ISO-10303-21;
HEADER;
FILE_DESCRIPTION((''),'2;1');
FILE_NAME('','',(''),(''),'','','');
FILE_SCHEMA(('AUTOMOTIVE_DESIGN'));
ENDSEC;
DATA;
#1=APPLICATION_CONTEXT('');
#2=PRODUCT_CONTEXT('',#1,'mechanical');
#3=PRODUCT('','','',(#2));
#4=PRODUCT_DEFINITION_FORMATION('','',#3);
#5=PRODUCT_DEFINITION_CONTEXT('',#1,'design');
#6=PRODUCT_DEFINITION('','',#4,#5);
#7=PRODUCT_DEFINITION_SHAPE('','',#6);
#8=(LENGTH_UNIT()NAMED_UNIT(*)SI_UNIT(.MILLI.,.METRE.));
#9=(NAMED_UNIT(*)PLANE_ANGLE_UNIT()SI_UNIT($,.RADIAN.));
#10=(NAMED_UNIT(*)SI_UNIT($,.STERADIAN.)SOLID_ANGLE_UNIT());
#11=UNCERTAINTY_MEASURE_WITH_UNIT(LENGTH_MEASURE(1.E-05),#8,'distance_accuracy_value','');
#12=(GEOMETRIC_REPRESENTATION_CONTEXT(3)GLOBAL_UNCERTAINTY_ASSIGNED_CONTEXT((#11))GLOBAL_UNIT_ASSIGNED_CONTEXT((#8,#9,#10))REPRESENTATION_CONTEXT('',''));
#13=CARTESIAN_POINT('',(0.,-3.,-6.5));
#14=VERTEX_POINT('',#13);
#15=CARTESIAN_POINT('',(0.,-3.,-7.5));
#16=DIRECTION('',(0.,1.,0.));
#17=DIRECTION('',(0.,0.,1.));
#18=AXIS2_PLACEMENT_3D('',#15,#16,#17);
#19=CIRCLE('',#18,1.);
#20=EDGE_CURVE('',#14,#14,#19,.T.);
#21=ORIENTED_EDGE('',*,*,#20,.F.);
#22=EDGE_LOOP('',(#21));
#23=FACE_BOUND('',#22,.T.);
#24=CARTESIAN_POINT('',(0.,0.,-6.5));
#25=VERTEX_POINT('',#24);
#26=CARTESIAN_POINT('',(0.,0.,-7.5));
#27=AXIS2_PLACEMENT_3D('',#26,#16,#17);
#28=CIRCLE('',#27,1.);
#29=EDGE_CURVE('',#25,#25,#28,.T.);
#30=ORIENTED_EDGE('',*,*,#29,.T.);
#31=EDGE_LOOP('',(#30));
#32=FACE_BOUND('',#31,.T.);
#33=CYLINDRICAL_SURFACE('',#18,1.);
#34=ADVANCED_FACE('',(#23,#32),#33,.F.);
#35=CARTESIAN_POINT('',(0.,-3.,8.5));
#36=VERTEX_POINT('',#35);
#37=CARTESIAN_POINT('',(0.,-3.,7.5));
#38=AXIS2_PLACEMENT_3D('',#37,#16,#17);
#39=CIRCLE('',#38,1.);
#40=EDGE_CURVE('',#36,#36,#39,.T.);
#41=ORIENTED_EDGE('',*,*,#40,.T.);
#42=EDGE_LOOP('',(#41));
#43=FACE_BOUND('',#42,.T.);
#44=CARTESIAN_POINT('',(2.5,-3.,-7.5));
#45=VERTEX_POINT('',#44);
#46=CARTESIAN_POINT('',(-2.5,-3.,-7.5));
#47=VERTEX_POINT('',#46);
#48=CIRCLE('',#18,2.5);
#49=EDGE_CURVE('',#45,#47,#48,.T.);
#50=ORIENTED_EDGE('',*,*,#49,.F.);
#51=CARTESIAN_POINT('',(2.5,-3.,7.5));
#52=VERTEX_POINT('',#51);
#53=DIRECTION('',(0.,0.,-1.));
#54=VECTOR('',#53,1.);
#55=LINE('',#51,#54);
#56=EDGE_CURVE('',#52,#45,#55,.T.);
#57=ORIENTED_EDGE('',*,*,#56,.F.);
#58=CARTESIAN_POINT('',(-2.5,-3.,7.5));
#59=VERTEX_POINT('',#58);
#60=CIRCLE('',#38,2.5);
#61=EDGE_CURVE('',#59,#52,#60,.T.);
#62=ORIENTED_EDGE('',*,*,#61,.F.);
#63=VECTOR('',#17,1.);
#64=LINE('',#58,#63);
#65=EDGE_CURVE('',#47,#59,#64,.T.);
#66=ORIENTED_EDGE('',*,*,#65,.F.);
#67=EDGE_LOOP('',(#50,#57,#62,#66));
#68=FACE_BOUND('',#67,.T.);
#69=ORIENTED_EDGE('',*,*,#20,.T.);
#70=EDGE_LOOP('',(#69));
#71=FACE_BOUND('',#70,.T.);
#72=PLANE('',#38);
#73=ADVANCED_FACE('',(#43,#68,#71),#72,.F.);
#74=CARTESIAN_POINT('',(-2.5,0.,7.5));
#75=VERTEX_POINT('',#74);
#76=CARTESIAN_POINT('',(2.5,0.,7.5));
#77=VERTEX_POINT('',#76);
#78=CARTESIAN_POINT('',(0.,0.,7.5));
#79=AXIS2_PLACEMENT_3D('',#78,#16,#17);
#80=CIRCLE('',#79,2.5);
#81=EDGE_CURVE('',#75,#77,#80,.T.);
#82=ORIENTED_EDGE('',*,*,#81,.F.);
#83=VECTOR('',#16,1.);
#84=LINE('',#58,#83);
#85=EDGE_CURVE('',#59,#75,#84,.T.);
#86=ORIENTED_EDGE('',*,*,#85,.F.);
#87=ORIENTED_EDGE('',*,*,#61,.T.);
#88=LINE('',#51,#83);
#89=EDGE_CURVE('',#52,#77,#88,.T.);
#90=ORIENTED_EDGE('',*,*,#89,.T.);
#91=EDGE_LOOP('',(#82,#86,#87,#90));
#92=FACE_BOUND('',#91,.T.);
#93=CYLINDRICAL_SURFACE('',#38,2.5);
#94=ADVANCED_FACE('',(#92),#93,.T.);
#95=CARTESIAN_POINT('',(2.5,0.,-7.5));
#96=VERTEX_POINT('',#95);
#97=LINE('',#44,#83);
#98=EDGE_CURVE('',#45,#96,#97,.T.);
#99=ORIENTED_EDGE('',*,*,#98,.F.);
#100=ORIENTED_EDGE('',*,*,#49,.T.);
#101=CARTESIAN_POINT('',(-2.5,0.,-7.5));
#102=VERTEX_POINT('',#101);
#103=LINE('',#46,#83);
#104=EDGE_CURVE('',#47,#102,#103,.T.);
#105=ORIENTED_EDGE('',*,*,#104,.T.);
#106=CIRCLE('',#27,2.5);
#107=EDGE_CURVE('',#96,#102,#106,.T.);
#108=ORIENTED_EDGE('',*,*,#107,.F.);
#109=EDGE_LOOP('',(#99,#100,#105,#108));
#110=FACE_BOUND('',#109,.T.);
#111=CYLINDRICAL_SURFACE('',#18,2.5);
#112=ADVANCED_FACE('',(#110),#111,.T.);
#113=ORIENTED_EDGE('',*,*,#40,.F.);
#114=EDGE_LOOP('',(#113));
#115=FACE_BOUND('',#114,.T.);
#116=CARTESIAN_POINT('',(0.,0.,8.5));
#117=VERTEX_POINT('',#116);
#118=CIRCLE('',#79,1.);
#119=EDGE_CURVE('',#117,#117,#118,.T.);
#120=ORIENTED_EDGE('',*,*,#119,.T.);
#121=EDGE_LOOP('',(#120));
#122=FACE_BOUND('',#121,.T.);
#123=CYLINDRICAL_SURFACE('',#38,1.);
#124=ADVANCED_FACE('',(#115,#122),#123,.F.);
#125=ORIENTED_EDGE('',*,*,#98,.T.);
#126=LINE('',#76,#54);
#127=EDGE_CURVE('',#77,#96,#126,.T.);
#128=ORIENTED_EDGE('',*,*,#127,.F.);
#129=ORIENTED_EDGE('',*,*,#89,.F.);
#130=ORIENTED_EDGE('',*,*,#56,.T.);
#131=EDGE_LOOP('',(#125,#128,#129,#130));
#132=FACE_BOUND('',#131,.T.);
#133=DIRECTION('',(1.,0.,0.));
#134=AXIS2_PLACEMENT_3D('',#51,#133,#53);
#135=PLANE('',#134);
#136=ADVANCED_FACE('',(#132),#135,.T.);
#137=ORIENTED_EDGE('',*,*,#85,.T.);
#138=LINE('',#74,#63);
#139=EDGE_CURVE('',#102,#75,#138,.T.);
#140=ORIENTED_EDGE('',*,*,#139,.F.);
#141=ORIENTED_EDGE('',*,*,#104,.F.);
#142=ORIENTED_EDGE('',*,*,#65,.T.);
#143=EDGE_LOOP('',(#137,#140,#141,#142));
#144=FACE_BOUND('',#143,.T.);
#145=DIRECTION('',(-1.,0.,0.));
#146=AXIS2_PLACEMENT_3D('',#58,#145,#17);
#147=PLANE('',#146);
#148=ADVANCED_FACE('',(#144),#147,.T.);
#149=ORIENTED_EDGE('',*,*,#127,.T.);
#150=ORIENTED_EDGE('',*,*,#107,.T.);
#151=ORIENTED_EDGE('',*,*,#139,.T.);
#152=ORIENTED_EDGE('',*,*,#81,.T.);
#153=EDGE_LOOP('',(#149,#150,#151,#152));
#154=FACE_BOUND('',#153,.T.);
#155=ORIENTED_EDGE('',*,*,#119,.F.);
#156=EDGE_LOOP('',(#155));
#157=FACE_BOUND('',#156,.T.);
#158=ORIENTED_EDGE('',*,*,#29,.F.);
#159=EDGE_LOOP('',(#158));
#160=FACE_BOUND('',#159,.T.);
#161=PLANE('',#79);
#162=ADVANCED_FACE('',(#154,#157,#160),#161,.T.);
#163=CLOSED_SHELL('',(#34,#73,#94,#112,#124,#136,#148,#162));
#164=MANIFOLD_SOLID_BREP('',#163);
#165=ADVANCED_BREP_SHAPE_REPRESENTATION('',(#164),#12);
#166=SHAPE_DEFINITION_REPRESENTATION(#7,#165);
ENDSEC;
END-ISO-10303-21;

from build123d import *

# Parameters (mm, degrees)
CROQUIS1_R        = 1
BRIDA_BASE1_DEPTH = 3


# Sheet-metal steps are written as plain solids
with BuildPart() as part:
    # Croquis1 → Brida base1 (new body)
    with BuildSketch(Plane(origin=(0, 0, 0), x_dir=(1, 0, 0), z_dir=(0, 1, 0))):
        with BuildLine():
            Line((-2.5, -7.5), (-2.5, 7.5))
            ThreePointArc((-2.5, 7.5), (0, 10), (2.5, 7.5))
            Line((2.5, 7.5), (2.5, -7.5))
            ThreePointArc((2.5, -7.5), (0, -10), (-2.5, -7.5))
        make_face()
        with Locations(Location((0, 7.5, 0), (0, 0, 270))):
            Circle(CROQUIS1_R, mode=Mode.SUBTRACT)
        with Locations(Location((0, -7.5, 0), (0, 0, 270))):
            Circle(CROQUIS1_R, mode=Mode.SUBTRACT)
    extrude(amount=-BRIDA_BASE1_DEPTH)


solid = part.part
